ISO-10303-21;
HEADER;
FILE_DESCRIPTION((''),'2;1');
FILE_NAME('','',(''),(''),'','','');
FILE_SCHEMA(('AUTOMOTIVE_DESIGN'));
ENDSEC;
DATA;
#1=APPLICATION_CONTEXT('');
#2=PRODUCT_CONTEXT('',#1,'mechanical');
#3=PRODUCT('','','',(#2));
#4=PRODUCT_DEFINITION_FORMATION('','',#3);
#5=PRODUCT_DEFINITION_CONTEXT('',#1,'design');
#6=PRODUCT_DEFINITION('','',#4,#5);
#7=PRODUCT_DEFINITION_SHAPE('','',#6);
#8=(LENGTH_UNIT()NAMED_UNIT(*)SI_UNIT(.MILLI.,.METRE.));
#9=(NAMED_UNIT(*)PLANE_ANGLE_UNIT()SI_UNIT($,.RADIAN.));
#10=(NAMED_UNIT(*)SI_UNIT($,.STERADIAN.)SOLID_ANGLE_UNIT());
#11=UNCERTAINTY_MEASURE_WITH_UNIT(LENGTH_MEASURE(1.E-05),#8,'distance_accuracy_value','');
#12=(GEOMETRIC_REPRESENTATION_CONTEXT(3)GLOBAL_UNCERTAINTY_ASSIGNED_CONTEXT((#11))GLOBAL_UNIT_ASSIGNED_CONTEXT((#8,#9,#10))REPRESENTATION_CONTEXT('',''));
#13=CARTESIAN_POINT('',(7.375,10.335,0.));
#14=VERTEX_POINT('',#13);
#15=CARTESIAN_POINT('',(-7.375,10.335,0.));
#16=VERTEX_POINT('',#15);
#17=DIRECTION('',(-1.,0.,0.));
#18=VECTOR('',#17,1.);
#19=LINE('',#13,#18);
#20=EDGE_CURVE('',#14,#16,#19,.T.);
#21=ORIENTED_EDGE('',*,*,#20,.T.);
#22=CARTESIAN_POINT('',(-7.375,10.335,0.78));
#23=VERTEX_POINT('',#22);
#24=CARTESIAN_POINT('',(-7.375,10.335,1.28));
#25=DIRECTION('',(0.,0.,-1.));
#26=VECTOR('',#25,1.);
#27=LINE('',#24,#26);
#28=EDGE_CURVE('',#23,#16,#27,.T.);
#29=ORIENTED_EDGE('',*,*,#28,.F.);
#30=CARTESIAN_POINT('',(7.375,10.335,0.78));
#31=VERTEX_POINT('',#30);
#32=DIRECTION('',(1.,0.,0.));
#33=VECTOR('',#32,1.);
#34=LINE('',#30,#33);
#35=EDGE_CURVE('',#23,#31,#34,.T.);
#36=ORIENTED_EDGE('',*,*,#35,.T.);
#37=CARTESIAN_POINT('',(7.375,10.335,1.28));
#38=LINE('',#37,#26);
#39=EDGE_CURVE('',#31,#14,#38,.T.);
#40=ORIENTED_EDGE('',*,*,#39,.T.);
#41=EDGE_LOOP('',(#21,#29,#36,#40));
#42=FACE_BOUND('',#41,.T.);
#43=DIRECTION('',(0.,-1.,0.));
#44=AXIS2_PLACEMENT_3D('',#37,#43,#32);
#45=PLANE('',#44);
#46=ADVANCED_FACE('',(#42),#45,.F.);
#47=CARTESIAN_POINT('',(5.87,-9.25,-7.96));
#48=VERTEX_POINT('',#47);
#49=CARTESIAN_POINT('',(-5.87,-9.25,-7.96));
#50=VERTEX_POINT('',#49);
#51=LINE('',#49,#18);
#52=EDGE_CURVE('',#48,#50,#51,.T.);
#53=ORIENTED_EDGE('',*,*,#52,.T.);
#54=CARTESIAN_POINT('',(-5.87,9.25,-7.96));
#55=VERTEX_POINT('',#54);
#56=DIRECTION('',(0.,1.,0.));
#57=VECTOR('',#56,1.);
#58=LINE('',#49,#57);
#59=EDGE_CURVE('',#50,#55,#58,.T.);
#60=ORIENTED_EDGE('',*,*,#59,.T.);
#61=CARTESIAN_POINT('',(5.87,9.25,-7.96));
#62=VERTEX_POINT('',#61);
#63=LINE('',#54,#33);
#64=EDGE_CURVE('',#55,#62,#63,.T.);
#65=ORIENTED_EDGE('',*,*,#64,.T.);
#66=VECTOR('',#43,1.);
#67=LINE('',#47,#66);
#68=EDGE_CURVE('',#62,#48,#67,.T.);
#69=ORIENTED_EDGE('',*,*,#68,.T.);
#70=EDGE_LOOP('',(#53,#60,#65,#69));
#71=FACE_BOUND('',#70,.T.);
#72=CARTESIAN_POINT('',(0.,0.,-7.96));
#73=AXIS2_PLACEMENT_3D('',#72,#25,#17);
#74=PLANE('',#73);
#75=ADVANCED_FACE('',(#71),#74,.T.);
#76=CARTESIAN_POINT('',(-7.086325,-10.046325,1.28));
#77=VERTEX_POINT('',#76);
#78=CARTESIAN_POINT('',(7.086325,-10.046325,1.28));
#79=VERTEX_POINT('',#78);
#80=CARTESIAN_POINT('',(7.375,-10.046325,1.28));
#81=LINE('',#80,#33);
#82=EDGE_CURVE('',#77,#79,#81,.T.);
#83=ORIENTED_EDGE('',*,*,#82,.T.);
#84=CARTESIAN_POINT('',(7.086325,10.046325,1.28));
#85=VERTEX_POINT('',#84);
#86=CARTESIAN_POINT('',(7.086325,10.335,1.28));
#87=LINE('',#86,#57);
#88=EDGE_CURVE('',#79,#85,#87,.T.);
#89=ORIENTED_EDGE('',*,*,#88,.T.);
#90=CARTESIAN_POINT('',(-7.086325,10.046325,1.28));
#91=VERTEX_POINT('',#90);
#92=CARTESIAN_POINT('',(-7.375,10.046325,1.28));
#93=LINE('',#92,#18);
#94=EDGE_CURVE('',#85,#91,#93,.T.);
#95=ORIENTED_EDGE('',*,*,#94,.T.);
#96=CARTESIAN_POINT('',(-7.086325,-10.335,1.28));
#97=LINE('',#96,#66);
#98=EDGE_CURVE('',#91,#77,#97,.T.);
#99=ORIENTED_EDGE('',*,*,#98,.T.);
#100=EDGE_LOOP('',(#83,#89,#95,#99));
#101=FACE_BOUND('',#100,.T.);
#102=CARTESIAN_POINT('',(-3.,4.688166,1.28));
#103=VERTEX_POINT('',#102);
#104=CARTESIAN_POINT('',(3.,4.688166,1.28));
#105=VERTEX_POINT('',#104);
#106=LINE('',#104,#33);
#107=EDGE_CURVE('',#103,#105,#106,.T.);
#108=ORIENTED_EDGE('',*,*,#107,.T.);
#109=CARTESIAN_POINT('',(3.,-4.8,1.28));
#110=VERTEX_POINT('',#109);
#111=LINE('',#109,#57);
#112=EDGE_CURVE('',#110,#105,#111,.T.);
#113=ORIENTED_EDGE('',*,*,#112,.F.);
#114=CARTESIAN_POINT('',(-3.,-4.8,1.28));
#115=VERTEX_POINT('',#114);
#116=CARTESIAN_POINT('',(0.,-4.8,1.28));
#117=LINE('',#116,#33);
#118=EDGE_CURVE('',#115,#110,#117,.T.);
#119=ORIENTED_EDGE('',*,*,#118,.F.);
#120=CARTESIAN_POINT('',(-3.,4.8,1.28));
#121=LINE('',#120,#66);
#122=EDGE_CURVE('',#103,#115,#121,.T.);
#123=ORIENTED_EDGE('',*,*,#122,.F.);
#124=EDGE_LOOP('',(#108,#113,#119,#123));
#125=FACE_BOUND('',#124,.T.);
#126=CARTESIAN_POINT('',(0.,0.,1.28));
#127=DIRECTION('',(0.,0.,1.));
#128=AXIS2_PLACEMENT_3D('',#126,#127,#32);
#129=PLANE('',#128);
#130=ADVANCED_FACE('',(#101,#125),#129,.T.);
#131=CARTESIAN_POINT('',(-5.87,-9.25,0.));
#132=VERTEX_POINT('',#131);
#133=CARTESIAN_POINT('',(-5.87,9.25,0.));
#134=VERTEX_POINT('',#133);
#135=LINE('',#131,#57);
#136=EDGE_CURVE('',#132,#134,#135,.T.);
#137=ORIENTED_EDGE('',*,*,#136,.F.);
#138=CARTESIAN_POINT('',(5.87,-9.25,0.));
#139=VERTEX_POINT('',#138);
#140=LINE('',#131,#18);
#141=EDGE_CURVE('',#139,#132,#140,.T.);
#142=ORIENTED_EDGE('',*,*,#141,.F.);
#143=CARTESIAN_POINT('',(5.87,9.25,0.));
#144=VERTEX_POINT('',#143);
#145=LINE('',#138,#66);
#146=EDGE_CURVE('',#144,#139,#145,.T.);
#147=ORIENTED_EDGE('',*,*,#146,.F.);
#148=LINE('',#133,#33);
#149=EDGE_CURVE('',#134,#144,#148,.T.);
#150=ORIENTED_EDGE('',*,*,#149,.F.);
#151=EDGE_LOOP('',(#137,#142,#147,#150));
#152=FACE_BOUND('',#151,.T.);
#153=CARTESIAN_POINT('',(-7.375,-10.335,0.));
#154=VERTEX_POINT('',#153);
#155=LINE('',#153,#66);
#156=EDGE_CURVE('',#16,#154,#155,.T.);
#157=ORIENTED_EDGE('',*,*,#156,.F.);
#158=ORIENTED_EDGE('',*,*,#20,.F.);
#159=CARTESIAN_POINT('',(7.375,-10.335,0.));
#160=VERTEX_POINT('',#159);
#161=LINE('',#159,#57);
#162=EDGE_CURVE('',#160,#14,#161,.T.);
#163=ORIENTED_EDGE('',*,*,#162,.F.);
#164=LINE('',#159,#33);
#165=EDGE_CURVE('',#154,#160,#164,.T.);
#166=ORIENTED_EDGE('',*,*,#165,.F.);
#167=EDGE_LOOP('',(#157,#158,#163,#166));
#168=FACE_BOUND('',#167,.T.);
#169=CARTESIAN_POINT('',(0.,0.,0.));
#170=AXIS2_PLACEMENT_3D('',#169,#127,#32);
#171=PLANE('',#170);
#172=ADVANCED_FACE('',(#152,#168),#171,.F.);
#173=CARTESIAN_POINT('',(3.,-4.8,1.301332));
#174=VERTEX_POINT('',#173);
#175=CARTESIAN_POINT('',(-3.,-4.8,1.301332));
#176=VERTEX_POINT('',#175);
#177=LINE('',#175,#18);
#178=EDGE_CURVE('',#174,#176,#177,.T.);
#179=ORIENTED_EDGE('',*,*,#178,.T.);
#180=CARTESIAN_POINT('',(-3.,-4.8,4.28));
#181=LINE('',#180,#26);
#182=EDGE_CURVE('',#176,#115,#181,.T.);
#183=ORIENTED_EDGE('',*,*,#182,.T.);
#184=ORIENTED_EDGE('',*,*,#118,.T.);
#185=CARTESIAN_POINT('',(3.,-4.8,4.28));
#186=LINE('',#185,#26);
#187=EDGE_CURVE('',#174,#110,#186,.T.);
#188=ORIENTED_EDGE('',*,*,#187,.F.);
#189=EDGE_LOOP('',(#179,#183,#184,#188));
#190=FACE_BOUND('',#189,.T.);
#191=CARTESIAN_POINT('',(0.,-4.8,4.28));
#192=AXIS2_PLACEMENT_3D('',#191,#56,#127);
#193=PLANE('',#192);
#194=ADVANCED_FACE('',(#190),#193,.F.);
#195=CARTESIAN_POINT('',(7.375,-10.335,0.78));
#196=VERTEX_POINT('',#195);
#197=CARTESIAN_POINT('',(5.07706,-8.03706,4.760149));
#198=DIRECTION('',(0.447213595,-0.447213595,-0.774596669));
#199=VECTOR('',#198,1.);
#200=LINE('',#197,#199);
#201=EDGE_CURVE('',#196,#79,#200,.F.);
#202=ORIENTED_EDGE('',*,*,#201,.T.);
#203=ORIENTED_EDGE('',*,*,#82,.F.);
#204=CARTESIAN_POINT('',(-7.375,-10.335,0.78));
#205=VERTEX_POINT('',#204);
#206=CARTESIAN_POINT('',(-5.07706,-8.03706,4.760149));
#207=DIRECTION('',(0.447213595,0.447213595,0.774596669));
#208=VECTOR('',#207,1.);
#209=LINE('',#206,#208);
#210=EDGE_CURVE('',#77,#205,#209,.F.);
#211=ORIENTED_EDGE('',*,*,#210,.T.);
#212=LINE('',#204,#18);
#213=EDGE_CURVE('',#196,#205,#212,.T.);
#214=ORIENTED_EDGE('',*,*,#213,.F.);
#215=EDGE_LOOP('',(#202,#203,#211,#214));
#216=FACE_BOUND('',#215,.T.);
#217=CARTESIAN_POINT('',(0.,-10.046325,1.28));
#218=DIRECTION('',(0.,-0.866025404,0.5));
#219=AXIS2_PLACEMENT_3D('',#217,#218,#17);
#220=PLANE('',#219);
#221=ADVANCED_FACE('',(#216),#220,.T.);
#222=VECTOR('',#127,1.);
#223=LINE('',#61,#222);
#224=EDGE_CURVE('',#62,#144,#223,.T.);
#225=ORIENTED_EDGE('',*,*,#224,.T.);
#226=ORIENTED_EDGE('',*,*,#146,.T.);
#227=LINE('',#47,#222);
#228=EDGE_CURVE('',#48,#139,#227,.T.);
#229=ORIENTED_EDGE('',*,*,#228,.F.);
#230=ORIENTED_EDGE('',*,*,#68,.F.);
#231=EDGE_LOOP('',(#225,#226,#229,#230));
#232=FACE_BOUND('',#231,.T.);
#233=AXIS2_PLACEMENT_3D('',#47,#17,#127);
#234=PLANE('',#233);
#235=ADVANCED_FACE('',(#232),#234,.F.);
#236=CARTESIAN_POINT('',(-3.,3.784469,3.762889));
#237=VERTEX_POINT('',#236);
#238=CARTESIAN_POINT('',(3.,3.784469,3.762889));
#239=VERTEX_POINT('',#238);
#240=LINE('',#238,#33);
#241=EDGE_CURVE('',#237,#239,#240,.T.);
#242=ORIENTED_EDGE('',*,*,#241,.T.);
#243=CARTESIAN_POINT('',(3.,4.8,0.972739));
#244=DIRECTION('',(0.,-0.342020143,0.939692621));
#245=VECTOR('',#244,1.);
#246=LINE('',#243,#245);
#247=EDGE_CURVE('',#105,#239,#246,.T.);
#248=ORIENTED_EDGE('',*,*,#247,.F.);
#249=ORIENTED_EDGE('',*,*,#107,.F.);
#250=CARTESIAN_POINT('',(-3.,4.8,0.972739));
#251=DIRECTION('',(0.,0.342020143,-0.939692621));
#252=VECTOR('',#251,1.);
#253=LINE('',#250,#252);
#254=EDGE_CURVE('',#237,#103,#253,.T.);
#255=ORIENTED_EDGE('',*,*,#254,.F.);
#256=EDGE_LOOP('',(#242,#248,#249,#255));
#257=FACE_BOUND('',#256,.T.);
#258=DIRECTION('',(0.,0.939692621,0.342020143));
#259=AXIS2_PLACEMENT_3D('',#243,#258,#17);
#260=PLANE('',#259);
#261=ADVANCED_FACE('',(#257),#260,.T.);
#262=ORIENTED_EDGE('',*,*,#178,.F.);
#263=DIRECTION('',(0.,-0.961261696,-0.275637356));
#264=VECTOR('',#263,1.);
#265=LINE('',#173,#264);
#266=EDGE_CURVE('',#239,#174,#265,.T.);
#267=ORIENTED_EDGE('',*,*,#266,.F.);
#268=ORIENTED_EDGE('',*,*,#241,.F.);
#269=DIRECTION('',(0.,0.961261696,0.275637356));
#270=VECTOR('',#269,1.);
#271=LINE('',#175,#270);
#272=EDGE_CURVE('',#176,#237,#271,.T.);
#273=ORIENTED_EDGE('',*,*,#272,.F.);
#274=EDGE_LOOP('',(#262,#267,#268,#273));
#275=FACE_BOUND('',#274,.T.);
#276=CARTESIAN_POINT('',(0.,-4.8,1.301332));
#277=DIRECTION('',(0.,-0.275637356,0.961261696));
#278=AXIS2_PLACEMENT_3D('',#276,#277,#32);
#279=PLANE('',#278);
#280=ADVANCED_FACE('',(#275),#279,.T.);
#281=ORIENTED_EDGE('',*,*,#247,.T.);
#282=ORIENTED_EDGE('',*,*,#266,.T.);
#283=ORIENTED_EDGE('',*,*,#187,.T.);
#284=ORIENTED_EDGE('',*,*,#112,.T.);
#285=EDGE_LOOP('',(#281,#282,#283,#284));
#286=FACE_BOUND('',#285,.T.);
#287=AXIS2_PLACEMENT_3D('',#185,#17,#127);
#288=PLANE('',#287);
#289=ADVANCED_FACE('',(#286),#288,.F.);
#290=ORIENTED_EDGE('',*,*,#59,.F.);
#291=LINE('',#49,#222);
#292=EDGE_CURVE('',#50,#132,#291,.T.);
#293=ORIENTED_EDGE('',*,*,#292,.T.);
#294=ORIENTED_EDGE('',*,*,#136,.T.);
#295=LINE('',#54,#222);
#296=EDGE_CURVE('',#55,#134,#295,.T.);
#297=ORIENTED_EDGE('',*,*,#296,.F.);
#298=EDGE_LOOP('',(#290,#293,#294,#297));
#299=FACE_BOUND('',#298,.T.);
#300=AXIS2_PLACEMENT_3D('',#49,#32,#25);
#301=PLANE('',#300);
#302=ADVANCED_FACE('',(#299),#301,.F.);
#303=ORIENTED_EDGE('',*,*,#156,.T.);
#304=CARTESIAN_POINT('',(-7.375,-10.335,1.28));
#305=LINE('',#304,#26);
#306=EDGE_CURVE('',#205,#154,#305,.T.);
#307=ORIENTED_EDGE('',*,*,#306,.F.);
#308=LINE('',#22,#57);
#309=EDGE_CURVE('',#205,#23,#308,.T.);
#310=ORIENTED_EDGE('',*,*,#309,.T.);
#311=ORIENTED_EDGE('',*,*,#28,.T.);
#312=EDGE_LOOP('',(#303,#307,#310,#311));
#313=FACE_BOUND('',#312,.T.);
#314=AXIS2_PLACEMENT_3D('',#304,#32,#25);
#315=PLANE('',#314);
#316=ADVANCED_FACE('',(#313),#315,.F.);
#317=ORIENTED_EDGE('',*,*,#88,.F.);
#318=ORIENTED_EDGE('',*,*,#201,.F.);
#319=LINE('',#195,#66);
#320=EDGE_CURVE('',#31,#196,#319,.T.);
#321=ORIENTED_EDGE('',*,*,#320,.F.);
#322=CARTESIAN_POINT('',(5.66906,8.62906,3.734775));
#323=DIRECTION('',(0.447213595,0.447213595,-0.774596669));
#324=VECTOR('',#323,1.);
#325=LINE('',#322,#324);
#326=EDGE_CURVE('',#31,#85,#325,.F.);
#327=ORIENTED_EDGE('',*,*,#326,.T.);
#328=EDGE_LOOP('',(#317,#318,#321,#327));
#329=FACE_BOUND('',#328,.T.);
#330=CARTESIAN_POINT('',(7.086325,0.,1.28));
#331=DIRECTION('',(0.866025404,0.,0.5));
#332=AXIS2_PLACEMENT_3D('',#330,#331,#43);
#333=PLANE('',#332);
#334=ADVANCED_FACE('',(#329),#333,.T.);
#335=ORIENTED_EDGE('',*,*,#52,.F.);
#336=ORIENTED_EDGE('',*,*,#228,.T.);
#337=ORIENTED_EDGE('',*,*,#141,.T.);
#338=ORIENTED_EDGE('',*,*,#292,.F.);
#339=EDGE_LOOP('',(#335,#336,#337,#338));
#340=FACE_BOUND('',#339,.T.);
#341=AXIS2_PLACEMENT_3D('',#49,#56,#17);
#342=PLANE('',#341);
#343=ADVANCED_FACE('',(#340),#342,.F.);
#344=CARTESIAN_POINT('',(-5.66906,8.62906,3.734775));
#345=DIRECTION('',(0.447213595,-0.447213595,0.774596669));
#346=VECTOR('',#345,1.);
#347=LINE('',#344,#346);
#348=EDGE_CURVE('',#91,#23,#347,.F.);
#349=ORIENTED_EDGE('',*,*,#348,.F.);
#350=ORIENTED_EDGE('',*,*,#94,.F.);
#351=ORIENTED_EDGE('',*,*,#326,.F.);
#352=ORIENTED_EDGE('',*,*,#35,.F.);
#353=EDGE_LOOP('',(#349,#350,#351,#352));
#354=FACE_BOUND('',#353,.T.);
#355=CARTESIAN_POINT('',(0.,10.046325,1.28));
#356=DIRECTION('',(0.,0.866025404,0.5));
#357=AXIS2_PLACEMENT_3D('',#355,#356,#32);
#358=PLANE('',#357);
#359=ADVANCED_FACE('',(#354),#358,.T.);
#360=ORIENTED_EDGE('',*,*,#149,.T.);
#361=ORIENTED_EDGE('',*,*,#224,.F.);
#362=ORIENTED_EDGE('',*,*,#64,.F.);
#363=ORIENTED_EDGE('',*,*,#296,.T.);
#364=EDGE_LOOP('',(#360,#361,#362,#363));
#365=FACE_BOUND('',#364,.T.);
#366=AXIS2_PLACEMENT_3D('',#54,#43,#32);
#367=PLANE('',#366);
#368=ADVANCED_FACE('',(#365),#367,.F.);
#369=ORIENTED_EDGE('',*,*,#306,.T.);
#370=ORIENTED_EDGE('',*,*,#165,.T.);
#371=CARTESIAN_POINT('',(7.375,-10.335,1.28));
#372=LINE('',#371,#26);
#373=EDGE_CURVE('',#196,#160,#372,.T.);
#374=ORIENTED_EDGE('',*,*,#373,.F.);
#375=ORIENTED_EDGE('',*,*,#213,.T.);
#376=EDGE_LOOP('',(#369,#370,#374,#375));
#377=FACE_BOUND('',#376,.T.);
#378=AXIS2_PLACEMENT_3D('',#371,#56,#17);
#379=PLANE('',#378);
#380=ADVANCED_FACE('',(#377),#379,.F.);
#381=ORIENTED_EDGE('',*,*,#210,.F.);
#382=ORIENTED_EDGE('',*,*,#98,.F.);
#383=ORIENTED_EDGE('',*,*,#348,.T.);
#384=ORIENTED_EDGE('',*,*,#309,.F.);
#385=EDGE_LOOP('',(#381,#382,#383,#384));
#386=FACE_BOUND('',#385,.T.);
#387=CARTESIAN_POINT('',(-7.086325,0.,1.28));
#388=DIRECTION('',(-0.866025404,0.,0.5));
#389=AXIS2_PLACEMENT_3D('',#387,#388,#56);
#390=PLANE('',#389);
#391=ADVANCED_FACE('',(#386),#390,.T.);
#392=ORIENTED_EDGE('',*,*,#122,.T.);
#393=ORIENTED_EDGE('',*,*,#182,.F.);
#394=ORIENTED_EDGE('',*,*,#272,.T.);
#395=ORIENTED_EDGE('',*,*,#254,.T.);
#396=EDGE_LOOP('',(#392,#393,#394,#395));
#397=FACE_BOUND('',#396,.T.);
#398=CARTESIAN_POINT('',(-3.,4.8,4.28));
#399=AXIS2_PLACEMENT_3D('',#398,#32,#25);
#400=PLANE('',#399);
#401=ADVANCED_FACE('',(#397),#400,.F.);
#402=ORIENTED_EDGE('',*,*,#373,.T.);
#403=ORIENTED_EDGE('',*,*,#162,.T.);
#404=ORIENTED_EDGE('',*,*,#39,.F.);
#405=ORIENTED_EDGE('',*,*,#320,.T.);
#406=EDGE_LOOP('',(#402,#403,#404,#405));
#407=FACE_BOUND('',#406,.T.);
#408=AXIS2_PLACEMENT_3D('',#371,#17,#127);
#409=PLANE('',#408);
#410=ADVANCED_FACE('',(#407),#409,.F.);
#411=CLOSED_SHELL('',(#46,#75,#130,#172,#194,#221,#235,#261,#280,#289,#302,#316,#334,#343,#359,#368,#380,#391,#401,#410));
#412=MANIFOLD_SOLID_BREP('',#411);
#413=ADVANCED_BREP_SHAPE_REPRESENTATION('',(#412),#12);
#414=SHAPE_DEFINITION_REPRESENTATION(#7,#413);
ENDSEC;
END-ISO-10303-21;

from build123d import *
from OCP.BRepFilletAPI import BRepFilletAPI_MakeChamfer

# Parameters (mm, degrees)
SKETCH_1_W       = 14.75
SKETCH_1_H       = 20.67
EXTRUDE_1_DEPTH  = 1.28
EXTRUDE_2_DEPTH  = 3
CHAMFER_3_SIZE   = 2
CHAMFER_3_SIZE_2 = 11.342563639
CHAMFER_4_SIZE   = 0.5
CHAMFER_4_SIZE2  = 0.288675135
CHAMFER_5_SIZE   = 3
CHAMFER_5_SIZE_2 = 1.041889066
CHAMFER_6_SIZE   = 0.978668112
CHAMFER_6_SIZE_2 = 9
SKETCH_3_W       = 11.74
SKETCH_3_H       = 18.5
EXTRUDE_3_DEPTH  = 7.96


with BuildPart() as part:
    # 草图1 → 凸台-拉伸1 (new body)
    with BuildSketch(Plane.XY):
        Rectangle(SKETCH_1_W, SKETCH_1_H)
    extrude(amount=EXTRUDE_1_DEPTH)

    # 草图2 → 凸台-拉伸2 (add)
    with BuildSketch(Plane.XY.offset(1.28)):
        Polygon((0, -4.8), (-3, -4.8), (-3, 4.8), (3, 4.8), (3, -4.8), align=None)
    extrude(amount=EXTRUDE_2_DEPTH)

    # 倒角3
    # the kernel refuses this chamfer: 11.342563639, 2 mm, written as the material it takes off along each edge
    with BuildSketch(Plane(origin=(32.474091667, -4.8, 4.28), x_dir=(0, -0.21013876076743543, -0.9776715712462578), z_dir=(-1, 0, 0))) as chamfer_3_piece_1:
        Polygon((CHAMFER_3_SIZE * 0.977671571246, -CHAMFER_3_SIZE * 0.210138760767), (-CHAMFER_3_SIZE_2 * 0.210138760772, -CHAMFER_3_SIZE_2 * 0.977671571267), (0, 0), align=None)
    extrude(amount=64.948183335, mode=Mode.SUBTRACT)

    # 倒角4: one chamfer whose edges measure the first distance from different faces: ONE call of the kernel's chamfer builder (chamfer() names one face for all edges)
    chamfer_4_edges_1 = [part.edges().sort_by_distance(p)[0] for p in [
        (7.375, 0, 1.28),
    ]]
    chamfer_4_side_1 = [part.faces().sort_by_distance(p)[0] for p in [
        (7.375, 0, 0.64),
    ]]
    chamfer_4_edges_2 = [part.edges().sort_by_distance(p)[0] for p in [
        (0, 10.335, 1.28),
    ]]
    chamfer_4_side_2 = [part.faces().sort_by_distance(p)[0] for p in [
        (0, 10.335, 0.64),
    ]]
    chamfer_4_edges_3 = [part.edges().sort_by_distance(p)[0] for p in [
        (-7.375, 0, 1.28),
    ]]
    chamfer_4_side_3 = [part.faces().sort_by_distance(p)[0] for p in [
        (-7.375, 0, 0.64),
    ]]
    chamfer_4_edges_4 = [part.edges().sort_by_distance(p)[0] for p in [
        (0, -10.335, 1.28),
    ]]
    chamfer_4_side_4 = [part.faces().sort_by_distance(p)[0] for p in [
        (0, -10.335, 0.64),
    ]]
    chamfer_4 = BRepFilletAPI_MakeChamfer(part.part.solid().wrapped)
    for e in chamfer_4_edges_1:
        chamfer_4.Add(CHAMFER_4_SIZE, CHAMFER_4_SIZE2, e.wrapped, chamfer_4_side_1[0].wrapped)  # the first distance lies on this face
    for e in chamfer_4_edges_2:
        chamfer_4.Add(CHAMFER_4_SIZE, CHAMFER_4_SIZE2, e.wrapped, chamfer_4_side_2[0].wrapped)  # the first distance lies on this face
    for e in chamfer_4_edges_3:
        chamfer_4.Add(CHAMFER_4_SIZE, CHAMFER_4_SIZE2, e.wrapped, chamfer_4_side_3[0].wrapped)  # the first distance lies on this face
    for e in chamfer_4_edges_4:
        chamfer_4.Add(CHAMFER_4_SIZE, CHAMFER_4_SIZE2, e.wrapped, chamfer_4_side_4[0].wrapped)  # the first distance lies on this face
    add(Compound.cast(chamfer_4.Shape()), mode=Mode.REPLACE)

    # 倒角5
    # the kernel refuses this chamfer: 3, 1.041889066 mm, written as the material it takes off along each edge
    with BuildSketch(Plane(origin=(10.782584198, 4.8, 3.972739015), x_dir=(0, 0.013184058198646008, -0.9999130865277315), z_dir=(-1, 0, 0))) as chamfer_5_piece_1_section:
        Polygon((CHAMFER_5_SIZE * 0.999913086528, CHAMFER_5_SIZE * 0.0131840581986), (CHAMFER_5_SIZE_2 * 0.160649322571, CHAMFER_5_SIZE_2 * 0.987011547633), (0, 0), align=None)
    chamfer_5_piece_1 = extrude(amount=21.565168395, mode=Mode.PRIVATE)
    chamfer_5_piece_1 = split(chamfer_5_piece_1, bisect_by=Plane(origin=(0, 4.454539571, 1.28), z_dir=(0, 0, 1)), keep=Keep.TOP, mode=Mode.PRIVATE)
    add(chamfer_5_piece_1, mode=Mode.SUBTRACT)

    # 倒角6
    # the kernel refuses this chamfer: 9, 0.978668112 mm, written as the material it takes off along each edge
    with BuildSketch(Plane(origin=(26.395258852, -4.8, 2.28), x_dir=(0, -0.30567862025886394, -0.952134749453373), z_dir=(-1, 0, 0))) as chamfer_6_piece_1:
        Polygon((CHAMFER_6_SIZE * 0.952134749764, -CHAMFER_6_SIZE * 0.305678620359), (-CHAMFER_6_SIZE_2 * 0.466371139297, -CHAMFER_6_SIZE_2 * 0.884589147814), (0, 0), align=None)
    extrude(amount=52.790517704, mode=Mode.SUBTRACT)

    # 草图3 → 凸台-拉伸3 (add)
    with BuildSketch(Plane(origin=(0, 0, 0), x_dir=(-1, 0, 0), z_dir=(0, 0, -1))):
        Rectangle(SKETCH_3_W, SKETCH_3_H)
    extrude(amount=EXTRUDE_3_DEPTH)


solid = part.part
